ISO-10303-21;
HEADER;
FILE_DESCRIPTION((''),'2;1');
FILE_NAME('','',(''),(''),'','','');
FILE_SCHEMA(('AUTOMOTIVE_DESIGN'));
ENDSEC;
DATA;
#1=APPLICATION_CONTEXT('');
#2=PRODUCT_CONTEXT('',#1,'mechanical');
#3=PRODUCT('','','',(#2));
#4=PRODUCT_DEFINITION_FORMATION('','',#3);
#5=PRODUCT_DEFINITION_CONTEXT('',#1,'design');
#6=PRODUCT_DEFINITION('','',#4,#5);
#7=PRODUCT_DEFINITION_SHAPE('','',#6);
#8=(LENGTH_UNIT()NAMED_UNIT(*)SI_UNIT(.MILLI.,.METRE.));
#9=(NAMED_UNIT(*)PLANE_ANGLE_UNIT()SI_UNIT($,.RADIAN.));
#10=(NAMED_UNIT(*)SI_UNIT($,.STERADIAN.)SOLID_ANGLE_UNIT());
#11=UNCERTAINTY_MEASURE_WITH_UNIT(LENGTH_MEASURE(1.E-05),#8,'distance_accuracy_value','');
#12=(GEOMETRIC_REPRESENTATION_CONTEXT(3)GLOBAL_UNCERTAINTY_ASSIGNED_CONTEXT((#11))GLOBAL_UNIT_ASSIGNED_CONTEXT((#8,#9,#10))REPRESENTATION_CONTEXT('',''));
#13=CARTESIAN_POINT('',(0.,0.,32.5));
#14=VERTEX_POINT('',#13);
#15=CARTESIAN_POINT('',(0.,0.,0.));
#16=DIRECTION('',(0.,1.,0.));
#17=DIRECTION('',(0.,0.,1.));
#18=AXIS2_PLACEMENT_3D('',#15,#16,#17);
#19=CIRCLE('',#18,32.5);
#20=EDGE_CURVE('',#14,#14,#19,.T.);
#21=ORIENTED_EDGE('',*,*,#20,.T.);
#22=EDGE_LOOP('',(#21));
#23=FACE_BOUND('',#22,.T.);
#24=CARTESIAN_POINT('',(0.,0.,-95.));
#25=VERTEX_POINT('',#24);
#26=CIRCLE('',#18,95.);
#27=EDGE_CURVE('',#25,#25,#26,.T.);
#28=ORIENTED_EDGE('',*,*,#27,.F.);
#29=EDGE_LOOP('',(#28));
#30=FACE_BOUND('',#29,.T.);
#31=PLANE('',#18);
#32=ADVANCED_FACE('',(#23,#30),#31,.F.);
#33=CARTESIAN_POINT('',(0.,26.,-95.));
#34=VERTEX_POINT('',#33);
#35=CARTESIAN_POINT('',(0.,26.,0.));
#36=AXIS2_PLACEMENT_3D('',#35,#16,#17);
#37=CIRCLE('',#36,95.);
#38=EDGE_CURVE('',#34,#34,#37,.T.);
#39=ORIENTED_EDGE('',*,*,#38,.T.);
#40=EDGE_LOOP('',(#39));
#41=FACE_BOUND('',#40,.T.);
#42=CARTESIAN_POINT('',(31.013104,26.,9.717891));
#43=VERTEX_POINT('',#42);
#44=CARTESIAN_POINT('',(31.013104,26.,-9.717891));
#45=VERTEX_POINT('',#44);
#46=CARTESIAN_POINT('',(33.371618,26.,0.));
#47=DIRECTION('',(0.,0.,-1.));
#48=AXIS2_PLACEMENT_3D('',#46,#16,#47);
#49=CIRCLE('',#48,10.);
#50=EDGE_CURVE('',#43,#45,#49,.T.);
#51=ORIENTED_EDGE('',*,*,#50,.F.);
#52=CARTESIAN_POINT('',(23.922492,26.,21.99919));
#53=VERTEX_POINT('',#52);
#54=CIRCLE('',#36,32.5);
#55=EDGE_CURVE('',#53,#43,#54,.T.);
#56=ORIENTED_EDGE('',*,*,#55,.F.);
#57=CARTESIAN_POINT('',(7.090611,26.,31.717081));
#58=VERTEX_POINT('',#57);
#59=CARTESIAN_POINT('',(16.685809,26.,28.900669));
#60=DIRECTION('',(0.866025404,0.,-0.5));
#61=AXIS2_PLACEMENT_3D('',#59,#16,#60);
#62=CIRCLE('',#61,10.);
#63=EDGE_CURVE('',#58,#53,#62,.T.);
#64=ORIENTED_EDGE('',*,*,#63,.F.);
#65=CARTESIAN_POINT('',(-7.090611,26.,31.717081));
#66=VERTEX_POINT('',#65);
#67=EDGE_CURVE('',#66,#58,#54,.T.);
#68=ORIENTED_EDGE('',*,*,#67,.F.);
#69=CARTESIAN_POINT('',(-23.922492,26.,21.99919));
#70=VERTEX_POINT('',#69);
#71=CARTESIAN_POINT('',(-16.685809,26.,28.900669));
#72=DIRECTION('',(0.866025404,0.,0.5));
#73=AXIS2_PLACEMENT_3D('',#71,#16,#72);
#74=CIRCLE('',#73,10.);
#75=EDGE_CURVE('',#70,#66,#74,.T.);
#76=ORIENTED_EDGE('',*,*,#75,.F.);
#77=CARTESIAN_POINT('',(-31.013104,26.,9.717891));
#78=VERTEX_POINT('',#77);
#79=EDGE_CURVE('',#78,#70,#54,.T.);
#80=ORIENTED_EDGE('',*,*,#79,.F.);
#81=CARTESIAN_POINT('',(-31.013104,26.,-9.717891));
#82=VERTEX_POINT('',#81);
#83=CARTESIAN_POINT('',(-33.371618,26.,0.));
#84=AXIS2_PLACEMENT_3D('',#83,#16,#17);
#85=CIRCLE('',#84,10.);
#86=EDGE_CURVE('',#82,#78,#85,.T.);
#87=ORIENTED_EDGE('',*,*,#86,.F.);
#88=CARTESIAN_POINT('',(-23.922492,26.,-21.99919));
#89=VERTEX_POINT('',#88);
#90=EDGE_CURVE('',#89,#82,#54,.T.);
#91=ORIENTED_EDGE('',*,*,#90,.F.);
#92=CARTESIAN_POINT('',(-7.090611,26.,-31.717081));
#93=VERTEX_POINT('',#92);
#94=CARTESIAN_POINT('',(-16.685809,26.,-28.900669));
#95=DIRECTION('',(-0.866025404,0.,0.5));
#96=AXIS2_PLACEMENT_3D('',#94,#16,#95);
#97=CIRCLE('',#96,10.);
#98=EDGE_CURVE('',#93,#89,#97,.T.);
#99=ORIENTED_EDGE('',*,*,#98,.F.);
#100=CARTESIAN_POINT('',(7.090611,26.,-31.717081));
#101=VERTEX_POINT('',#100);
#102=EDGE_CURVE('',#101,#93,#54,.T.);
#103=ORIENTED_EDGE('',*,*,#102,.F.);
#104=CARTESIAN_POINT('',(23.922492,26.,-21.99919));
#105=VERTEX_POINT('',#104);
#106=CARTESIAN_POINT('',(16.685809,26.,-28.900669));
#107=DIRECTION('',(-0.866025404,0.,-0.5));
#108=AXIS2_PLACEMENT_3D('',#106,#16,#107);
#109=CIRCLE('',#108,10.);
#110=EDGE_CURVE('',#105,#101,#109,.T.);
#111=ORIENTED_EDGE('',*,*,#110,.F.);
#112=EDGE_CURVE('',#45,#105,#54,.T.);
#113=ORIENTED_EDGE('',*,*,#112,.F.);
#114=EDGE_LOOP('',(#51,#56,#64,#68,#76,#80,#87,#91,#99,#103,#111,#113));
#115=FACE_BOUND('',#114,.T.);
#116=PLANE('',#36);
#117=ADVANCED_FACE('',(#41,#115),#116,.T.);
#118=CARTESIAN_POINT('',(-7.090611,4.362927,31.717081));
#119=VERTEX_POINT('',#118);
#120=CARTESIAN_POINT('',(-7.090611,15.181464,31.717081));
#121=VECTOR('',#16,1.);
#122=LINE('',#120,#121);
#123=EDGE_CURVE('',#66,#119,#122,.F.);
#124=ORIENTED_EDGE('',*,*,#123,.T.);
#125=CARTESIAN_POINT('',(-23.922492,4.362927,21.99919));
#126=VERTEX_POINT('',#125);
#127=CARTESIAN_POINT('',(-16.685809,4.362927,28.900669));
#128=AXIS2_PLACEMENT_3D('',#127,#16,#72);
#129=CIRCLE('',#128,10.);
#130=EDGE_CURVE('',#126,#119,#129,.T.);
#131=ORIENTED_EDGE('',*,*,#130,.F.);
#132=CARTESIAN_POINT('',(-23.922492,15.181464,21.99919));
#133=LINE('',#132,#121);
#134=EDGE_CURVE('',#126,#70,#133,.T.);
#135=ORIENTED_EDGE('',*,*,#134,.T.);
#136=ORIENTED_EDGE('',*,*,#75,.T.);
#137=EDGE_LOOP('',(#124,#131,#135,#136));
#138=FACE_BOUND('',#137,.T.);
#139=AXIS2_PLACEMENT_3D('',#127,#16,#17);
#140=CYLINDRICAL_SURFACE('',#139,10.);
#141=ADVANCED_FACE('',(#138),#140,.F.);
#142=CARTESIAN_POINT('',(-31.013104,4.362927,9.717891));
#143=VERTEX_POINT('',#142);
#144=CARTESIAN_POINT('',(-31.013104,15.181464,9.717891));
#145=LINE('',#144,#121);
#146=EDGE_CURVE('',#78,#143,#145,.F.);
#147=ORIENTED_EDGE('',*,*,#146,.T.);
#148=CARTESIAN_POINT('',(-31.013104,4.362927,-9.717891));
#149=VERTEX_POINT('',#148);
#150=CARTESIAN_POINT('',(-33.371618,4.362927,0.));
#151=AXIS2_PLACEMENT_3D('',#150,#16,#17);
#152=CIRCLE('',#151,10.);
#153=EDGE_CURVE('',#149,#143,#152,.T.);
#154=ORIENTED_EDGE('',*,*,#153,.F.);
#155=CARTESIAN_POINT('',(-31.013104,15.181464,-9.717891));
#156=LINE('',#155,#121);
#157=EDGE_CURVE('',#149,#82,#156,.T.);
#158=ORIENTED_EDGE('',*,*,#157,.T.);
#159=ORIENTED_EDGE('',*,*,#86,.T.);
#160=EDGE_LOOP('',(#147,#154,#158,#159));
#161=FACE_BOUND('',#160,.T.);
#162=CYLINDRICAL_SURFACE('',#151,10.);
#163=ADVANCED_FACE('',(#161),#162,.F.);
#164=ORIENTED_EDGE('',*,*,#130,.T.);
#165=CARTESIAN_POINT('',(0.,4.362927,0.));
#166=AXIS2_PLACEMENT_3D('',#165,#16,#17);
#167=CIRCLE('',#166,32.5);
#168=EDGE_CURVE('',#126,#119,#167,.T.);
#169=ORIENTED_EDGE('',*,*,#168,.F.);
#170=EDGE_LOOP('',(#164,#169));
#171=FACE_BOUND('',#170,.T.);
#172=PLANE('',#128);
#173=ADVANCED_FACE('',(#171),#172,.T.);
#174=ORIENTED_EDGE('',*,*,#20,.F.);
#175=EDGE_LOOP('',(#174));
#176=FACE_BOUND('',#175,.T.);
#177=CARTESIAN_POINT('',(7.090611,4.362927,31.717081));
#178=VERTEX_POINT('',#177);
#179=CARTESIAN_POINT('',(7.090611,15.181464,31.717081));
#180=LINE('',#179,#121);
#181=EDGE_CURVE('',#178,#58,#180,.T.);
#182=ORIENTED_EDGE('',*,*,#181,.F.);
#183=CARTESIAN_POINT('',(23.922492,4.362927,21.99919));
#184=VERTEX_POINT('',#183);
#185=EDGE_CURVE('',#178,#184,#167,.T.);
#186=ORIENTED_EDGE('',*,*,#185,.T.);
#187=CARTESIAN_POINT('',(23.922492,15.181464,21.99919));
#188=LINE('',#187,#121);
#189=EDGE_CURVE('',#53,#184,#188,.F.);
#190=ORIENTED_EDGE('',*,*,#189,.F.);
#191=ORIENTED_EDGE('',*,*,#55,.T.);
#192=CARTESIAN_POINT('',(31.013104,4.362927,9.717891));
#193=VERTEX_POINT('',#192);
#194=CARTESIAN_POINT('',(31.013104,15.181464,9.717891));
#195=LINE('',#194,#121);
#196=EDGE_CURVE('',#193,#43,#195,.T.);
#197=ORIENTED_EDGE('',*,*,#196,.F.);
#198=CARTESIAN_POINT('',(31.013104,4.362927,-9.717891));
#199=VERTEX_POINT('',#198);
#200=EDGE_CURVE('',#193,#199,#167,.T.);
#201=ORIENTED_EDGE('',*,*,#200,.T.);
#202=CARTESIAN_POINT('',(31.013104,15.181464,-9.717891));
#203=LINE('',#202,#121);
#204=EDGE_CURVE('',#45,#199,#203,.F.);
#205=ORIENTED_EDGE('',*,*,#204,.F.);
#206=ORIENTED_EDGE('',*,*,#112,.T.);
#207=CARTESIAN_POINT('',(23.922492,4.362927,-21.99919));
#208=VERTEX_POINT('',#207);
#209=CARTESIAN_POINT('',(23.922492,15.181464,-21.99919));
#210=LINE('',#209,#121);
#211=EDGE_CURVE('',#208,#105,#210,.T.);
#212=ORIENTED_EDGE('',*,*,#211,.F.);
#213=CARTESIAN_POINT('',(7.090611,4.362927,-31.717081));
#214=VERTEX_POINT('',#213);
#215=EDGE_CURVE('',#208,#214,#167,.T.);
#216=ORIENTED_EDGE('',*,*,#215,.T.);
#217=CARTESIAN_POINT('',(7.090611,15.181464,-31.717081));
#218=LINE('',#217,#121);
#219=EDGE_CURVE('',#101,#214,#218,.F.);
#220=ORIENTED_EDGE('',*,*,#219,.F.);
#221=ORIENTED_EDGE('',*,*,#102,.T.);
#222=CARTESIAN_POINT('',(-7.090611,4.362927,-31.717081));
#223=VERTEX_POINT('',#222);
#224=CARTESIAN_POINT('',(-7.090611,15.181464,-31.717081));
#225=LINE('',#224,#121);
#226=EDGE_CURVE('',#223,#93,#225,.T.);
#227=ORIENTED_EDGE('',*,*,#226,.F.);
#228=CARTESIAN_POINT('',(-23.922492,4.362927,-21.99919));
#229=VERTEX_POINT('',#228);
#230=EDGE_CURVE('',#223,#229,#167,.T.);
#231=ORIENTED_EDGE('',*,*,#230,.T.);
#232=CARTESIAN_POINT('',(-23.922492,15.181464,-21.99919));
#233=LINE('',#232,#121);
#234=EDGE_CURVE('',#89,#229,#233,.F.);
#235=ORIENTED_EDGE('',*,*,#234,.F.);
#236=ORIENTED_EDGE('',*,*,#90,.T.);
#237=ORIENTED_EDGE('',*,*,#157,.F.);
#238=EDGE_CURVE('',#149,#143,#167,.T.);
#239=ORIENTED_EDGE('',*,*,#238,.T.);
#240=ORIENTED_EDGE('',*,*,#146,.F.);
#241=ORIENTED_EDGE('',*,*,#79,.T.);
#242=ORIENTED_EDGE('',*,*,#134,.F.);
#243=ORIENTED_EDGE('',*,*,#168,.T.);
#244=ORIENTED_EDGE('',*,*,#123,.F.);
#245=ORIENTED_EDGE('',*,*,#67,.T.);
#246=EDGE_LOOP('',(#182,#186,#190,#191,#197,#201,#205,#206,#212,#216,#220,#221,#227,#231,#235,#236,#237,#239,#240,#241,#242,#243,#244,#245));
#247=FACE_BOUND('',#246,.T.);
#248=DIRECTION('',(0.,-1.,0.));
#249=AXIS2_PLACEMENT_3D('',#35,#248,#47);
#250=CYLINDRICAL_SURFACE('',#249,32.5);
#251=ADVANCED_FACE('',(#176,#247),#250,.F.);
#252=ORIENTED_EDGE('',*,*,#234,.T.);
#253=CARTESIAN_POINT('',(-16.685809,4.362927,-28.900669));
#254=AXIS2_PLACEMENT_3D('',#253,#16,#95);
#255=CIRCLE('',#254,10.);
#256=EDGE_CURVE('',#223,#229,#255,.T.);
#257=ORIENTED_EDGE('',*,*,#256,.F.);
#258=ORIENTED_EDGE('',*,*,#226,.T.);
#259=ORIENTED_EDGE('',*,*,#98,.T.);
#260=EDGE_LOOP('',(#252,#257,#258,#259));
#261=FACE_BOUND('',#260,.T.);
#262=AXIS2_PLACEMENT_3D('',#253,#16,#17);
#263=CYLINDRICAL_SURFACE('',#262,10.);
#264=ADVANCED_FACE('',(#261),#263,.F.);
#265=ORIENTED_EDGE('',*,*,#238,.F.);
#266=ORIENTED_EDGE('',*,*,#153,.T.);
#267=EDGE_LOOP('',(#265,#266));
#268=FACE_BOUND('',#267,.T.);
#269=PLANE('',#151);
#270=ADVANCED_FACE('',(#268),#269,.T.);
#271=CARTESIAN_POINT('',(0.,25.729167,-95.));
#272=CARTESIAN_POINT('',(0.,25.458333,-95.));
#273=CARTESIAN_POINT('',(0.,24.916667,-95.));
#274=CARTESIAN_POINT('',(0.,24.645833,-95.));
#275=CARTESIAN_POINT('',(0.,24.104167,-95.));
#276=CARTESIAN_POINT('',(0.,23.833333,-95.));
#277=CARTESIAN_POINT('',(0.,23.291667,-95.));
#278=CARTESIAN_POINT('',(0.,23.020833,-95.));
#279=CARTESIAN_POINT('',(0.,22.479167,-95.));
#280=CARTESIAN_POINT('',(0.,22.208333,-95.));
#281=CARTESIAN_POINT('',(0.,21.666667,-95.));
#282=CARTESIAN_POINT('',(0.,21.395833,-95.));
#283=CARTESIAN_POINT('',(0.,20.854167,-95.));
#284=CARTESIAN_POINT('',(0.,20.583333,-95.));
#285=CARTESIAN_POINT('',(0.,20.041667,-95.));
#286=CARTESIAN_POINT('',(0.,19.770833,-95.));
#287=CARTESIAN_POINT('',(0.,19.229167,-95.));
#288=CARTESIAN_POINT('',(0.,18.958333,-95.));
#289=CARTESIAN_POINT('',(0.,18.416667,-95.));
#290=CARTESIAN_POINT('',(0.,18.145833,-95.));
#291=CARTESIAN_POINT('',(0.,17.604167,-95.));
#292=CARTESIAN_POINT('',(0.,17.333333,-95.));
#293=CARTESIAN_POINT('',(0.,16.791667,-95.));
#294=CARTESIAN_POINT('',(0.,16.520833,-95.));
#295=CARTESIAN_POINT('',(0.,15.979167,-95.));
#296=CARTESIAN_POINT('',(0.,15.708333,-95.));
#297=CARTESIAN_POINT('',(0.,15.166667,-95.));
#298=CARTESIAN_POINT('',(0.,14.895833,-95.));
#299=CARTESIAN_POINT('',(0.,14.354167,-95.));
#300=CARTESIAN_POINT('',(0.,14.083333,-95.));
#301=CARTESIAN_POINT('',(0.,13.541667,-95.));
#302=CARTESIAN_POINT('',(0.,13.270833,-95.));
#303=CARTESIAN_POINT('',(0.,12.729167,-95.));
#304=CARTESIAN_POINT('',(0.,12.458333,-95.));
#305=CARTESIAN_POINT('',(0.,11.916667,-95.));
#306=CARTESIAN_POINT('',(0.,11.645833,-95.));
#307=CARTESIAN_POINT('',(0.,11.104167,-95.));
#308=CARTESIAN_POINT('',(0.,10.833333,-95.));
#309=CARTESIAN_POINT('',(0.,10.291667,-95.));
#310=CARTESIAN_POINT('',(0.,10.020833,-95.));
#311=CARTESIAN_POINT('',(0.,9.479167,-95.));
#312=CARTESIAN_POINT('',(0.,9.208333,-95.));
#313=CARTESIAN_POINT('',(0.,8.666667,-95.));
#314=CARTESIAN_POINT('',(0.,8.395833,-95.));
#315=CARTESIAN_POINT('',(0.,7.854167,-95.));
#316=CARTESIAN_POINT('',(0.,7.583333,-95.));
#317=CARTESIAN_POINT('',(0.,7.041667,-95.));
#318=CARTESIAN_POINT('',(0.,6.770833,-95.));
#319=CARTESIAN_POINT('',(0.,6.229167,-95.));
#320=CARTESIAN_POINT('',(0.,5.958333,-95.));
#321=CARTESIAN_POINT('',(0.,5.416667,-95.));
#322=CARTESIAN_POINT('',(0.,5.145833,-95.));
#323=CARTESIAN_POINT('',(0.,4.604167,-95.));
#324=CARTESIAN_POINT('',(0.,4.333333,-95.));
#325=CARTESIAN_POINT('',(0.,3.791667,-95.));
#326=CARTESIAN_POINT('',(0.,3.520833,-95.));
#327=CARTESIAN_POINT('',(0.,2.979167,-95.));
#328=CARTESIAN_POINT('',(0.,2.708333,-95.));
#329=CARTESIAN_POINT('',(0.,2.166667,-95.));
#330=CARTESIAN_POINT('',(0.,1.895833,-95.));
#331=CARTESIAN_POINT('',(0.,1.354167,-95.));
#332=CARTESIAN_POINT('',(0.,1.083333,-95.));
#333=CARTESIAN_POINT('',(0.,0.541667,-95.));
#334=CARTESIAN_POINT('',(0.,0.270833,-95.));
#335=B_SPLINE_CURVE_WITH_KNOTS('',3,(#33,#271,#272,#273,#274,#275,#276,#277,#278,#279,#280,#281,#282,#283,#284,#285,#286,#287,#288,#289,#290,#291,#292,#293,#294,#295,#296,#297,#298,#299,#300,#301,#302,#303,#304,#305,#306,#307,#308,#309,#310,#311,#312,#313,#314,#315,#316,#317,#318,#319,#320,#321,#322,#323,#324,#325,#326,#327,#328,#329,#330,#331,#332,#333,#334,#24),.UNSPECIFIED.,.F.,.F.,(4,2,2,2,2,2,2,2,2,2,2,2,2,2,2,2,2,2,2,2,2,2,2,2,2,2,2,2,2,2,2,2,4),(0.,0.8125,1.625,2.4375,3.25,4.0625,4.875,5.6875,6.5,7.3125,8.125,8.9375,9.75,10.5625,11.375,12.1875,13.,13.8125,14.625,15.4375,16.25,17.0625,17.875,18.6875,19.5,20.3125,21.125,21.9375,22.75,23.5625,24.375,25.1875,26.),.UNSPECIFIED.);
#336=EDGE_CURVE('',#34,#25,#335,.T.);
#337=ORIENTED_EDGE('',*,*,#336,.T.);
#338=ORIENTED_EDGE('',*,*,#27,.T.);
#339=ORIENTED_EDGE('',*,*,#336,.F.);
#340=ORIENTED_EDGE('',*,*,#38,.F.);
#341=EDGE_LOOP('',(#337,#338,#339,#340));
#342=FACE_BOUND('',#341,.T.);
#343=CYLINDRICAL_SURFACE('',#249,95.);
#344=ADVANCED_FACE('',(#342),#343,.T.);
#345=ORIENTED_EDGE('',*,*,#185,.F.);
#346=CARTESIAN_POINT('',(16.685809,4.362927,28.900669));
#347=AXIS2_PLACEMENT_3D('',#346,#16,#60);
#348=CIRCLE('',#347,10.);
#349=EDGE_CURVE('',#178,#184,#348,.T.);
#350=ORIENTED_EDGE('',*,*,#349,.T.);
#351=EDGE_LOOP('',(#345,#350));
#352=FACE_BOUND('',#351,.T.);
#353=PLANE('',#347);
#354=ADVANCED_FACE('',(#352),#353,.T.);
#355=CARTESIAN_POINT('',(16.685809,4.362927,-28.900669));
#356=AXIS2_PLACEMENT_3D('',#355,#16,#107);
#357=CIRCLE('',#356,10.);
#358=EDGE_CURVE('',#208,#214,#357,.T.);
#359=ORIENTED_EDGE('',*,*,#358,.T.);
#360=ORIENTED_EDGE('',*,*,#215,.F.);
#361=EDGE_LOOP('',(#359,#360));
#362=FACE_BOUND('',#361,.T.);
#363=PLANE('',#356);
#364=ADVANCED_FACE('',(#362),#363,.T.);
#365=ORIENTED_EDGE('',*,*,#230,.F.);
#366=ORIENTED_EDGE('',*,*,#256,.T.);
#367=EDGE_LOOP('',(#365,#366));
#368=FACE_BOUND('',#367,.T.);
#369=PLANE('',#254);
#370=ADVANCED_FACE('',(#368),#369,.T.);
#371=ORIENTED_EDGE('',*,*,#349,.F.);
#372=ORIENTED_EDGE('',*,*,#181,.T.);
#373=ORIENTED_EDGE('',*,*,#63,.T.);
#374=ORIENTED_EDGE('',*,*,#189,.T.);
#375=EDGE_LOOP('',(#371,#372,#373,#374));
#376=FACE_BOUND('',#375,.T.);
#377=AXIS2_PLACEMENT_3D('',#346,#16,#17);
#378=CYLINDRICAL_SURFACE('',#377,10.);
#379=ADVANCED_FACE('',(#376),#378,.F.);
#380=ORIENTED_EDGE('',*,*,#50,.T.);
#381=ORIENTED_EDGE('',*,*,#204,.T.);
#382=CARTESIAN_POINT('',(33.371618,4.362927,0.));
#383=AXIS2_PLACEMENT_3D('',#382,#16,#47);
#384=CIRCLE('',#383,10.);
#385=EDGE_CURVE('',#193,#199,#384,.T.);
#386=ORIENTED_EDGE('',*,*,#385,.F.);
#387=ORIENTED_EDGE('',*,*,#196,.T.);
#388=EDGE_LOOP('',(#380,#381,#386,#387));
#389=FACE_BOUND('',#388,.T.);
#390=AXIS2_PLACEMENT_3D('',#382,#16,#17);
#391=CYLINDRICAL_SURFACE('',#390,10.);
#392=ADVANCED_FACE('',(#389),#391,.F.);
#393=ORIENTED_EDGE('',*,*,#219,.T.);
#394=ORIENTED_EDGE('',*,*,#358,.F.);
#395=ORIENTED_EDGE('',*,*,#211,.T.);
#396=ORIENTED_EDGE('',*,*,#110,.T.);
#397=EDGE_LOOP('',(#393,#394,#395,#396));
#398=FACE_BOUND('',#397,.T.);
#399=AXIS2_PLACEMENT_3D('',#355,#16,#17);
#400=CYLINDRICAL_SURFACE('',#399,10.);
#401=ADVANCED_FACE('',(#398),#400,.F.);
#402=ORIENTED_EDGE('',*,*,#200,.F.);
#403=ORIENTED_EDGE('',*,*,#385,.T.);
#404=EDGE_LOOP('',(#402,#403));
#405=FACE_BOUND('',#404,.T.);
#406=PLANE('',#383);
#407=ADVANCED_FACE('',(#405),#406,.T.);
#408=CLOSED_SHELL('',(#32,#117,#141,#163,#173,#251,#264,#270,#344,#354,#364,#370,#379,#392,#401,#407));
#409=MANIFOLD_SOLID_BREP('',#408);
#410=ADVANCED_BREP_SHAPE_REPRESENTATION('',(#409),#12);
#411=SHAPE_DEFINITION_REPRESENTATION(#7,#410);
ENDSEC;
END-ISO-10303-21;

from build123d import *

# Parameters (mm, degrees)
SKETCH1_R           = 95
BOSS_EXTRUDE1_DEPTH = 26
SKETCH2_R           = 32.5
CUT_EXTRUDE1_DEPTH  = 137.842975706
SKETCH3_R           = 10
CUT_EXTRUDE2_DEPTH  = 21.637072692
CIRPATTERN1_COUNT   = 6


with BuildPart() as part:
    # Sketch1 → Boss-Extrude1 (new body)
    with BuildSketch(Plane(origin=(0, 0, 0), x_dir=(1, 0, 0), z_dir=(0, 1, 0))):
        Circle(SKETCH1_R)
    extrude(amount=BOSS_EXTRUDE1_DEPTH)

    # Sketch2 → Cut-Extrude1 (cut, through all)
    with BuildSketch(Plane(origin=(0, 0, 0), x_dir=(1, 0, 0), z_dir=(0, 1, 0))):
        Circle(SKETCH2_R)
    extrude(amount=CUT_EXTRUDE1_DEPTH, mode=Mode.SUBTRACT)

    # Sketch3 → Cut-Extrude2 (cut)
    with BuildSketch(Plane(origin=(0, 26, 0), x_dir=(1, 0, 0), z_dir=(0, 1, 0))):
        with Locations((-33.371618001, 0)):
            Circle(SKETCH3_R)
    cut_extrude2 = extrude(amount=-CUT_EXTRUDE2_DEPTH, mode=Mode.SUBTRACT)

    # CirPattern1: Cut-Extrude2 ×6 about axis
    cirpattern1_axis = Axis((0, 0, 0), (0, 1, 0))
    for i in range(1, CIRPATTERN1_COUNT):
        add(cut_extrude2.rotate(cirpattern1_axis, i * 360 / CIRPATTERN1_COUNT), mode=Mode.SUBTRACT)


solid = part.part
